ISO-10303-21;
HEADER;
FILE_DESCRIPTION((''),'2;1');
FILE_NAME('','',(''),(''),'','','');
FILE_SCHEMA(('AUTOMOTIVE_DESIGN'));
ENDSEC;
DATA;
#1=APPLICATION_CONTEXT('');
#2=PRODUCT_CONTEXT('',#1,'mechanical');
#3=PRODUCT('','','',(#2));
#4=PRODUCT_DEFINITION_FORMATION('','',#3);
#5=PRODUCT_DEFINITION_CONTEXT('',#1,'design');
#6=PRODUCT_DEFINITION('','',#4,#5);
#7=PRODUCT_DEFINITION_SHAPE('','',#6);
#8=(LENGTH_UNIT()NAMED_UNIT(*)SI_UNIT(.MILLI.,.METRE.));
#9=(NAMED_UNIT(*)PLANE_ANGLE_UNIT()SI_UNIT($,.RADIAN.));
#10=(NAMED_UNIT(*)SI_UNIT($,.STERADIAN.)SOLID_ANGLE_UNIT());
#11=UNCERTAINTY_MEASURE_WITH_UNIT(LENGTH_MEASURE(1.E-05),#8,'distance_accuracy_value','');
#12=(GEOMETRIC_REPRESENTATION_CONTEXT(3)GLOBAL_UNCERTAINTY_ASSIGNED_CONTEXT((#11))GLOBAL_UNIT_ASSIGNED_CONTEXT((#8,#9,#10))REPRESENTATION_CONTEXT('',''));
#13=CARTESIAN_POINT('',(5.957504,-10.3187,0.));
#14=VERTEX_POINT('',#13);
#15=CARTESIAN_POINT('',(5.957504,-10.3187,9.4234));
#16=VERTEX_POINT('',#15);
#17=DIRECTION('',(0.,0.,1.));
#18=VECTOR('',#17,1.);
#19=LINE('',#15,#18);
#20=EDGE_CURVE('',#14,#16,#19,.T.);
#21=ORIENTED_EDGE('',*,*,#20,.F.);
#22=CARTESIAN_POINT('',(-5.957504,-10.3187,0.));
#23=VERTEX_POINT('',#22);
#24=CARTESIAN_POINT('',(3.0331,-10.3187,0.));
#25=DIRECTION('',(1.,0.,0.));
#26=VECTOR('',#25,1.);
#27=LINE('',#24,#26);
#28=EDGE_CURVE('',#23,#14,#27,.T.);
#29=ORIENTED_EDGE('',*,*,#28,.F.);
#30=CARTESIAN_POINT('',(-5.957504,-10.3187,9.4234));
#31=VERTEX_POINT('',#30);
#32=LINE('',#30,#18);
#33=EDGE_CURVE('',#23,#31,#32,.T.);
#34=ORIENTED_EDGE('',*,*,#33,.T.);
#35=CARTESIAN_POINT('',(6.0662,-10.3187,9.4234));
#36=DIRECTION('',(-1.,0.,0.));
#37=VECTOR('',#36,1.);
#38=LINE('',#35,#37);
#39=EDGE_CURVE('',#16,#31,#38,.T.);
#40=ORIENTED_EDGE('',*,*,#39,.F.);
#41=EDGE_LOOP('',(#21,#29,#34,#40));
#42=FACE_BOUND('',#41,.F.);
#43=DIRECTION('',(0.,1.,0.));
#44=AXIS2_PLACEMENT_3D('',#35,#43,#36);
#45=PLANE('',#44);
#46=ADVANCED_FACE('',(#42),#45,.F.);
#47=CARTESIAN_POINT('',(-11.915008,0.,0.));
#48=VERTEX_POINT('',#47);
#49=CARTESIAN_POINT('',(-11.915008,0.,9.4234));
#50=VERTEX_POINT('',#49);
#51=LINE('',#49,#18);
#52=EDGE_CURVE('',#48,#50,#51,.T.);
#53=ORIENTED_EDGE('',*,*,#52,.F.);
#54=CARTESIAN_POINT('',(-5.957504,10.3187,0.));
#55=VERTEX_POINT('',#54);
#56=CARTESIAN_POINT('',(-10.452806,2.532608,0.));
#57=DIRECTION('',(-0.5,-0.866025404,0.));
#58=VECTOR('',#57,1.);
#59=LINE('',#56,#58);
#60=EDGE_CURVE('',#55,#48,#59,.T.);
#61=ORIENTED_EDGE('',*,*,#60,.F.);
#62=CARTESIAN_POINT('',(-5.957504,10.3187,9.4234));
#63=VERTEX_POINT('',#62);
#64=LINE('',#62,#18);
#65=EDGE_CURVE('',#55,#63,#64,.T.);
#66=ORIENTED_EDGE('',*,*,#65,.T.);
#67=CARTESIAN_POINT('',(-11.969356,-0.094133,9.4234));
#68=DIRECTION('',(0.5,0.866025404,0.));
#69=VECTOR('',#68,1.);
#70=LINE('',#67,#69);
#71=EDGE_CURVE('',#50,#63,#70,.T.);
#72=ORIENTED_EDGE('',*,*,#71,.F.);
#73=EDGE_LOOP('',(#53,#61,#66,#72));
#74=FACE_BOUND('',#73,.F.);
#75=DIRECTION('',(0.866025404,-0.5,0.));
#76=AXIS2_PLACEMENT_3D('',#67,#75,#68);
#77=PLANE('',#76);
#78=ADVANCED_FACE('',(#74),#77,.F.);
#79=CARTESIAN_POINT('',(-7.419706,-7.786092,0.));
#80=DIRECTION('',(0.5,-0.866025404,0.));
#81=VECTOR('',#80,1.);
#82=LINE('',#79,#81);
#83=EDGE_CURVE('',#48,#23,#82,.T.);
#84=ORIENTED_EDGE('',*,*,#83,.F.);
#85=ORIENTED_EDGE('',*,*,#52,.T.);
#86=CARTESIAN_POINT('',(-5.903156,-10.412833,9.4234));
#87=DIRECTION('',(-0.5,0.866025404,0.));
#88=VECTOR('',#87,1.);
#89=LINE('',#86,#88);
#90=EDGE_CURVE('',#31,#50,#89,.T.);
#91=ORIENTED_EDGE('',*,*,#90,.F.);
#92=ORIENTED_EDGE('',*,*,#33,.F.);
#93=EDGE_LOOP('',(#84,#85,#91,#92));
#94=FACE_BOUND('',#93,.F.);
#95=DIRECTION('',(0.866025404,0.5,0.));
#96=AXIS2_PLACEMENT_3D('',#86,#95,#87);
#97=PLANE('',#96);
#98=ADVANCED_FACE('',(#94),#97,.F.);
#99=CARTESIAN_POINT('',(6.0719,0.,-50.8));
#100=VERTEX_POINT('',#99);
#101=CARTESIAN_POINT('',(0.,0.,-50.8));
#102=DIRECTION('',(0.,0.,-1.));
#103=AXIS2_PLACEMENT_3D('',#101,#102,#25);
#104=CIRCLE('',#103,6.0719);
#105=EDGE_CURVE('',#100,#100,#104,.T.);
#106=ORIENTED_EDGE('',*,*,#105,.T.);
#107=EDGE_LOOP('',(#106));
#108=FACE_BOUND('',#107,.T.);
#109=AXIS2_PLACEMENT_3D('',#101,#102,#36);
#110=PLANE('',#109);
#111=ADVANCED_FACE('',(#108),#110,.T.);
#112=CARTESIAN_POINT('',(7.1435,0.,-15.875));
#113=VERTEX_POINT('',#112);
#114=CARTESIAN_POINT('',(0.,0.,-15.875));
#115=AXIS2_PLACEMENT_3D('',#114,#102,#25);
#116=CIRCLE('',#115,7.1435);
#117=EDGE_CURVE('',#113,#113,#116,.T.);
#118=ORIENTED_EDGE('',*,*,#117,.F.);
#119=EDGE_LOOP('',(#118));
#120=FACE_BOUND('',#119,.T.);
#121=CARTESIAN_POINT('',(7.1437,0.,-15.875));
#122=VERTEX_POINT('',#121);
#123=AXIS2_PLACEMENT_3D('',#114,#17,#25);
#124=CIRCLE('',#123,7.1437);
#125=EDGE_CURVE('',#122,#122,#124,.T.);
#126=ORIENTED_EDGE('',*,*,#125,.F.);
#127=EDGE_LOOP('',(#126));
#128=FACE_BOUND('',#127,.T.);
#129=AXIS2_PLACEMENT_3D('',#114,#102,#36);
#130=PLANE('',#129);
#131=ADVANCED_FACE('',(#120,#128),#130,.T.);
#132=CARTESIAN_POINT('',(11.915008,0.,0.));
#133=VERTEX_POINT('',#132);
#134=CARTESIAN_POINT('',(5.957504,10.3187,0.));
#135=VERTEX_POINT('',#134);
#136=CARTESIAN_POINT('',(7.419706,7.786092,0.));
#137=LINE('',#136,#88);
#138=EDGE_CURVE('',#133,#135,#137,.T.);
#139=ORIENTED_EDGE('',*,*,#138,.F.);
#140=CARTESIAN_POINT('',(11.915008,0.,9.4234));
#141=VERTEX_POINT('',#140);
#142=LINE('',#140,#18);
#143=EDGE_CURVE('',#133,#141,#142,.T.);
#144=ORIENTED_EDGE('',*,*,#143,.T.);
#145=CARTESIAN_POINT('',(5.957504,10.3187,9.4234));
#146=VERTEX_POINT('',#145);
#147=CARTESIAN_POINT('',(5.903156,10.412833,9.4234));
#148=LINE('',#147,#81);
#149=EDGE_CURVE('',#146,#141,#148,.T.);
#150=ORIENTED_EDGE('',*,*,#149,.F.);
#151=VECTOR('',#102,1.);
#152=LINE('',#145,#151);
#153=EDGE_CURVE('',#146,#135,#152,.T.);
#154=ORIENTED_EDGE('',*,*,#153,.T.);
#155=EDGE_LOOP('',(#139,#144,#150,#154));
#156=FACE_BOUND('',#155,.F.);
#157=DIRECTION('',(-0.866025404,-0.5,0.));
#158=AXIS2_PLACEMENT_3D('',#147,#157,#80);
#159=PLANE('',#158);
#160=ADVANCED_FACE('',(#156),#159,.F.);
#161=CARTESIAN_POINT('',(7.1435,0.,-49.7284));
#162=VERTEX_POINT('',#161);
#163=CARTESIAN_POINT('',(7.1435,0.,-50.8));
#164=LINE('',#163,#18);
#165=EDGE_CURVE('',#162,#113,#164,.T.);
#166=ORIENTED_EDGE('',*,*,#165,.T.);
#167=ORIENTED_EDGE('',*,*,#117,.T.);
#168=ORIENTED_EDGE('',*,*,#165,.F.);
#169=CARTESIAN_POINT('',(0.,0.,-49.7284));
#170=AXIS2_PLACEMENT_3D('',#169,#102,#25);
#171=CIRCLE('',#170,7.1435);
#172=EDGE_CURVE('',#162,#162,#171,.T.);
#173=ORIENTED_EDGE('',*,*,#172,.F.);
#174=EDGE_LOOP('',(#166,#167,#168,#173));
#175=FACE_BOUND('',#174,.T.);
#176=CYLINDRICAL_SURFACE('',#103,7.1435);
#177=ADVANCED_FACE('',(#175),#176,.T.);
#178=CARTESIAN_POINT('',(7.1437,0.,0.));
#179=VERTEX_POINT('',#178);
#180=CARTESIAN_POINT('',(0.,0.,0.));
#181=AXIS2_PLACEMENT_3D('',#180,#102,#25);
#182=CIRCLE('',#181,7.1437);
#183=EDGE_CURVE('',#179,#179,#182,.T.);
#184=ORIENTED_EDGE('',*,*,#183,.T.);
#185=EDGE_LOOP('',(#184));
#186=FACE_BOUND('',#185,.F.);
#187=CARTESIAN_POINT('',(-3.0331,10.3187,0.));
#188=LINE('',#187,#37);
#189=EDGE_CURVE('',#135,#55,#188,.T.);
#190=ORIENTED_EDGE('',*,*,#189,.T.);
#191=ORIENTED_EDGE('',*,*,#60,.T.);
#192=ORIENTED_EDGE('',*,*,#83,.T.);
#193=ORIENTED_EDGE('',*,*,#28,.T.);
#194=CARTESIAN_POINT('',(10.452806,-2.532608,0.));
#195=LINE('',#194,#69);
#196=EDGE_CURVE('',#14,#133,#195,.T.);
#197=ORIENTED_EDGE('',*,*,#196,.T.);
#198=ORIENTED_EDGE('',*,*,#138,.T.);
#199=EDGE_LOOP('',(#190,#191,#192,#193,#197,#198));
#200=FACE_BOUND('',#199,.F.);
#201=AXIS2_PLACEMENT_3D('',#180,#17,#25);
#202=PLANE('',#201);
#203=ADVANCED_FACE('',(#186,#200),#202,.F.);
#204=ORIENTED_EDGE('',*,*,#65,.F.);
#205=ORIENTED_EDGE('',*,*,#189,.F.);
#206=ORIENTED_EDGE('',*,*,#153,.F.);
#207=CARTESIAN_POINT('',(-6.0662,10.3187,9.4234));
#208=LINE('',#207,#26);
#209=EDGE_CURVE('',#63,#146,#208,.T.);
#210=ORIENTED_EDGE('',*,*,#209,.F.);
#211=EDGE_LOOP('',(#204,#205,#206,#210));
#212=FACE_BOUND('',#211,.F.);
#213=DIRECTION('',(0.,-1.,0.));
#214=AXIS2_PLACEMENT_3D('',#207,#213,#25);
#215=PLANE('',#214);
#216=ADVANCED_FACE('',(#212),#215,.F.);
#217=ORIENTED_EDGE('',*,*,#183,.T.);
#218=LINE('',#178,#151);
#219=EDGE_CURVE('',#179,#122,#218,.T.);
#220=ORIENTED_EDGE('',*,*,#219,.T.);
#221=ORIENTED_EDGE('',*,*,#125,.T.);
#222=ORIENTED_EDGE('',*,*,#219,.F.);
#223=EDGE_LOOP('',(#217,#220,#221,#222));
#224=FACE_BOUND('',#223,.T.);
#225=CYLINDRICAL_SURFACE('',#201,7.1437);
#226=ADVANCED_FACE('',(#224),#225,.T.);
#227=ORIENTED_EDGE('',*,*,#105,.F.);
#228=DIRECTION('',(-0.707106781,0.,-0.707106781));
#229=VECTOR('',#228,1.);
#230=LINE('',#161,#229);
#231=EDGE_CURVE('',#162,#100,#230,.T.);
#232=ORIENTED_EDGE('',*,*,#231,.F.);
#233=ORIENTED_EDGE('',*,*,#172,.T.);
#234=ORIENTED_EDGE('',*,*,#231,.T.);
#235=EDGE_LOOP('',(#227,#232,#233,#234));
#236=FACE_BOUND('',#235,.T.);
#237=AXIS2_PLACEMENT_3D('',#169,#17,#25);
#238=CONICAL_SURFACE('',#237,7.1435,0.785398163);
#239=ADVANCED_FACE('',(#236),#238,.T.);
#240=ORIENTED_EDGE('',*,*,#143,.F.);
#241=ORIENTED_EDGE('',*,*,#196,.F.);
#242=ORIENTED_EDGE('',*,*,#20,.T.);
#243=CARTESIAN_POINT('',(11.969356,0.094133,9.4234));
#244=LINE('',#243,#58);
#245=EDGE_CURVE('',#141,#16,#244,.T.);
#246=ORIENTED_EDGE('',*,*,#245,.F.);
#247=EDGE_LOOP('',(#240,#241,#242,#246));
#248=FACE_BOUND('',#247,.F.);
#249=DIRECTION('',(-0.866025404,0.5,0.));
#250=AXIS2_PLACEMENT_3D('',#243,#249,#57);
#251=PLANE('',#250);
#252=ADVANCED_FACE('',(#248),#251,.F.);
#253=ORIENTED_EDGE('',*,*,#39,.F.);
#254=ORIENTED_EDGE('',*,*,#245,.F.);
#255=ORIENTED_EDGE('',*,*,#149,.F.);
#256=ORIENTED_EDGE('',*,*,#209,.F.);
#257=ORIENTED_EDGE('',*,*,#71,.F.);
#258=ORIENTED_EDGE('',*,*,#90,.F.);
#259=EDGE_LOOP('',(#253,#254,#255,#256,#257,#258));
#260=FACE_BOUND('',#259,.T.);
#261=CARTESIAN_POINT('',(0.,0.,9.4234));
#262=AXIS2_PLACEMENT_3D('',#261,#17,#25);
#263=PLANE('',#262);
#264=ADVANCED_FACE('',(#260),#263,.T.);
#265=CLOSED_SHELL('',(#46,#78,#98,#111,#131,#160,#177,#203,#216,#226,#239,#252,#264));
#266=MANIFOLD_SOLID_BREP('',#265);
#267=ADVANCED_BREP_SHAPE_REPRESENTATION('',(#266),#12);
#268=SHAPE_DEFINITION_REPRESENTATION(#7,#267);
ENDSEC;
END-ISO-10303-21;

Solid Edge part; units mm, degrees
sketch "Sketch1" plane through (0, 0, 0) normal (0, 0, 1) x (1, 0, 0)
  circle A0 centre (0, 0) radius 11.9697
  dimension "D1" = 23.9395
extrude "Protrusion1" add sketch "Sketch1" along normal blind 9.4234
sketch "Sketch2" plane through (0, 0, 0) normal (0, 0, -1) x (1, 0, 0)
  circle A0 centre (0, 0) radius 7.1437
extrude "Protrusion2" add sketch "Sketch2" along normal blind 50.8
sketch "Sketch3" plane through (0, 0, -50.8) normal (0, 0, -1) x (1, 0, 0)
  circle A0 centre (0, 0) radius 7.1435
extrude "Cutout1" cut sketch "Sketch3" against normal blind 34.925 flip side to cut
chamfer "Chamfer_1" distance 1.0716 angle 45 1 edges at (-7.1435, 0, -50.8)
sketch "Sketch4" plane through (0, 0, 9.4234) normal (0, 0, 1) x (1, 0, 0)
  line L0 (-6.0662, 10.3187) -> (6.0662, 10.3187)
  dimension "D1" = 20.6375
extrude "Cutout2" cut sketch "Sketch4" against normal up to next material side at (0, 10.3687, 9.4234)
pattern_circular "Pattern1" count 6 over 360 about axis through (0, 0, 9.4234) along (0, 0, 1) of "Cutout2"
properties part number "24101172"
